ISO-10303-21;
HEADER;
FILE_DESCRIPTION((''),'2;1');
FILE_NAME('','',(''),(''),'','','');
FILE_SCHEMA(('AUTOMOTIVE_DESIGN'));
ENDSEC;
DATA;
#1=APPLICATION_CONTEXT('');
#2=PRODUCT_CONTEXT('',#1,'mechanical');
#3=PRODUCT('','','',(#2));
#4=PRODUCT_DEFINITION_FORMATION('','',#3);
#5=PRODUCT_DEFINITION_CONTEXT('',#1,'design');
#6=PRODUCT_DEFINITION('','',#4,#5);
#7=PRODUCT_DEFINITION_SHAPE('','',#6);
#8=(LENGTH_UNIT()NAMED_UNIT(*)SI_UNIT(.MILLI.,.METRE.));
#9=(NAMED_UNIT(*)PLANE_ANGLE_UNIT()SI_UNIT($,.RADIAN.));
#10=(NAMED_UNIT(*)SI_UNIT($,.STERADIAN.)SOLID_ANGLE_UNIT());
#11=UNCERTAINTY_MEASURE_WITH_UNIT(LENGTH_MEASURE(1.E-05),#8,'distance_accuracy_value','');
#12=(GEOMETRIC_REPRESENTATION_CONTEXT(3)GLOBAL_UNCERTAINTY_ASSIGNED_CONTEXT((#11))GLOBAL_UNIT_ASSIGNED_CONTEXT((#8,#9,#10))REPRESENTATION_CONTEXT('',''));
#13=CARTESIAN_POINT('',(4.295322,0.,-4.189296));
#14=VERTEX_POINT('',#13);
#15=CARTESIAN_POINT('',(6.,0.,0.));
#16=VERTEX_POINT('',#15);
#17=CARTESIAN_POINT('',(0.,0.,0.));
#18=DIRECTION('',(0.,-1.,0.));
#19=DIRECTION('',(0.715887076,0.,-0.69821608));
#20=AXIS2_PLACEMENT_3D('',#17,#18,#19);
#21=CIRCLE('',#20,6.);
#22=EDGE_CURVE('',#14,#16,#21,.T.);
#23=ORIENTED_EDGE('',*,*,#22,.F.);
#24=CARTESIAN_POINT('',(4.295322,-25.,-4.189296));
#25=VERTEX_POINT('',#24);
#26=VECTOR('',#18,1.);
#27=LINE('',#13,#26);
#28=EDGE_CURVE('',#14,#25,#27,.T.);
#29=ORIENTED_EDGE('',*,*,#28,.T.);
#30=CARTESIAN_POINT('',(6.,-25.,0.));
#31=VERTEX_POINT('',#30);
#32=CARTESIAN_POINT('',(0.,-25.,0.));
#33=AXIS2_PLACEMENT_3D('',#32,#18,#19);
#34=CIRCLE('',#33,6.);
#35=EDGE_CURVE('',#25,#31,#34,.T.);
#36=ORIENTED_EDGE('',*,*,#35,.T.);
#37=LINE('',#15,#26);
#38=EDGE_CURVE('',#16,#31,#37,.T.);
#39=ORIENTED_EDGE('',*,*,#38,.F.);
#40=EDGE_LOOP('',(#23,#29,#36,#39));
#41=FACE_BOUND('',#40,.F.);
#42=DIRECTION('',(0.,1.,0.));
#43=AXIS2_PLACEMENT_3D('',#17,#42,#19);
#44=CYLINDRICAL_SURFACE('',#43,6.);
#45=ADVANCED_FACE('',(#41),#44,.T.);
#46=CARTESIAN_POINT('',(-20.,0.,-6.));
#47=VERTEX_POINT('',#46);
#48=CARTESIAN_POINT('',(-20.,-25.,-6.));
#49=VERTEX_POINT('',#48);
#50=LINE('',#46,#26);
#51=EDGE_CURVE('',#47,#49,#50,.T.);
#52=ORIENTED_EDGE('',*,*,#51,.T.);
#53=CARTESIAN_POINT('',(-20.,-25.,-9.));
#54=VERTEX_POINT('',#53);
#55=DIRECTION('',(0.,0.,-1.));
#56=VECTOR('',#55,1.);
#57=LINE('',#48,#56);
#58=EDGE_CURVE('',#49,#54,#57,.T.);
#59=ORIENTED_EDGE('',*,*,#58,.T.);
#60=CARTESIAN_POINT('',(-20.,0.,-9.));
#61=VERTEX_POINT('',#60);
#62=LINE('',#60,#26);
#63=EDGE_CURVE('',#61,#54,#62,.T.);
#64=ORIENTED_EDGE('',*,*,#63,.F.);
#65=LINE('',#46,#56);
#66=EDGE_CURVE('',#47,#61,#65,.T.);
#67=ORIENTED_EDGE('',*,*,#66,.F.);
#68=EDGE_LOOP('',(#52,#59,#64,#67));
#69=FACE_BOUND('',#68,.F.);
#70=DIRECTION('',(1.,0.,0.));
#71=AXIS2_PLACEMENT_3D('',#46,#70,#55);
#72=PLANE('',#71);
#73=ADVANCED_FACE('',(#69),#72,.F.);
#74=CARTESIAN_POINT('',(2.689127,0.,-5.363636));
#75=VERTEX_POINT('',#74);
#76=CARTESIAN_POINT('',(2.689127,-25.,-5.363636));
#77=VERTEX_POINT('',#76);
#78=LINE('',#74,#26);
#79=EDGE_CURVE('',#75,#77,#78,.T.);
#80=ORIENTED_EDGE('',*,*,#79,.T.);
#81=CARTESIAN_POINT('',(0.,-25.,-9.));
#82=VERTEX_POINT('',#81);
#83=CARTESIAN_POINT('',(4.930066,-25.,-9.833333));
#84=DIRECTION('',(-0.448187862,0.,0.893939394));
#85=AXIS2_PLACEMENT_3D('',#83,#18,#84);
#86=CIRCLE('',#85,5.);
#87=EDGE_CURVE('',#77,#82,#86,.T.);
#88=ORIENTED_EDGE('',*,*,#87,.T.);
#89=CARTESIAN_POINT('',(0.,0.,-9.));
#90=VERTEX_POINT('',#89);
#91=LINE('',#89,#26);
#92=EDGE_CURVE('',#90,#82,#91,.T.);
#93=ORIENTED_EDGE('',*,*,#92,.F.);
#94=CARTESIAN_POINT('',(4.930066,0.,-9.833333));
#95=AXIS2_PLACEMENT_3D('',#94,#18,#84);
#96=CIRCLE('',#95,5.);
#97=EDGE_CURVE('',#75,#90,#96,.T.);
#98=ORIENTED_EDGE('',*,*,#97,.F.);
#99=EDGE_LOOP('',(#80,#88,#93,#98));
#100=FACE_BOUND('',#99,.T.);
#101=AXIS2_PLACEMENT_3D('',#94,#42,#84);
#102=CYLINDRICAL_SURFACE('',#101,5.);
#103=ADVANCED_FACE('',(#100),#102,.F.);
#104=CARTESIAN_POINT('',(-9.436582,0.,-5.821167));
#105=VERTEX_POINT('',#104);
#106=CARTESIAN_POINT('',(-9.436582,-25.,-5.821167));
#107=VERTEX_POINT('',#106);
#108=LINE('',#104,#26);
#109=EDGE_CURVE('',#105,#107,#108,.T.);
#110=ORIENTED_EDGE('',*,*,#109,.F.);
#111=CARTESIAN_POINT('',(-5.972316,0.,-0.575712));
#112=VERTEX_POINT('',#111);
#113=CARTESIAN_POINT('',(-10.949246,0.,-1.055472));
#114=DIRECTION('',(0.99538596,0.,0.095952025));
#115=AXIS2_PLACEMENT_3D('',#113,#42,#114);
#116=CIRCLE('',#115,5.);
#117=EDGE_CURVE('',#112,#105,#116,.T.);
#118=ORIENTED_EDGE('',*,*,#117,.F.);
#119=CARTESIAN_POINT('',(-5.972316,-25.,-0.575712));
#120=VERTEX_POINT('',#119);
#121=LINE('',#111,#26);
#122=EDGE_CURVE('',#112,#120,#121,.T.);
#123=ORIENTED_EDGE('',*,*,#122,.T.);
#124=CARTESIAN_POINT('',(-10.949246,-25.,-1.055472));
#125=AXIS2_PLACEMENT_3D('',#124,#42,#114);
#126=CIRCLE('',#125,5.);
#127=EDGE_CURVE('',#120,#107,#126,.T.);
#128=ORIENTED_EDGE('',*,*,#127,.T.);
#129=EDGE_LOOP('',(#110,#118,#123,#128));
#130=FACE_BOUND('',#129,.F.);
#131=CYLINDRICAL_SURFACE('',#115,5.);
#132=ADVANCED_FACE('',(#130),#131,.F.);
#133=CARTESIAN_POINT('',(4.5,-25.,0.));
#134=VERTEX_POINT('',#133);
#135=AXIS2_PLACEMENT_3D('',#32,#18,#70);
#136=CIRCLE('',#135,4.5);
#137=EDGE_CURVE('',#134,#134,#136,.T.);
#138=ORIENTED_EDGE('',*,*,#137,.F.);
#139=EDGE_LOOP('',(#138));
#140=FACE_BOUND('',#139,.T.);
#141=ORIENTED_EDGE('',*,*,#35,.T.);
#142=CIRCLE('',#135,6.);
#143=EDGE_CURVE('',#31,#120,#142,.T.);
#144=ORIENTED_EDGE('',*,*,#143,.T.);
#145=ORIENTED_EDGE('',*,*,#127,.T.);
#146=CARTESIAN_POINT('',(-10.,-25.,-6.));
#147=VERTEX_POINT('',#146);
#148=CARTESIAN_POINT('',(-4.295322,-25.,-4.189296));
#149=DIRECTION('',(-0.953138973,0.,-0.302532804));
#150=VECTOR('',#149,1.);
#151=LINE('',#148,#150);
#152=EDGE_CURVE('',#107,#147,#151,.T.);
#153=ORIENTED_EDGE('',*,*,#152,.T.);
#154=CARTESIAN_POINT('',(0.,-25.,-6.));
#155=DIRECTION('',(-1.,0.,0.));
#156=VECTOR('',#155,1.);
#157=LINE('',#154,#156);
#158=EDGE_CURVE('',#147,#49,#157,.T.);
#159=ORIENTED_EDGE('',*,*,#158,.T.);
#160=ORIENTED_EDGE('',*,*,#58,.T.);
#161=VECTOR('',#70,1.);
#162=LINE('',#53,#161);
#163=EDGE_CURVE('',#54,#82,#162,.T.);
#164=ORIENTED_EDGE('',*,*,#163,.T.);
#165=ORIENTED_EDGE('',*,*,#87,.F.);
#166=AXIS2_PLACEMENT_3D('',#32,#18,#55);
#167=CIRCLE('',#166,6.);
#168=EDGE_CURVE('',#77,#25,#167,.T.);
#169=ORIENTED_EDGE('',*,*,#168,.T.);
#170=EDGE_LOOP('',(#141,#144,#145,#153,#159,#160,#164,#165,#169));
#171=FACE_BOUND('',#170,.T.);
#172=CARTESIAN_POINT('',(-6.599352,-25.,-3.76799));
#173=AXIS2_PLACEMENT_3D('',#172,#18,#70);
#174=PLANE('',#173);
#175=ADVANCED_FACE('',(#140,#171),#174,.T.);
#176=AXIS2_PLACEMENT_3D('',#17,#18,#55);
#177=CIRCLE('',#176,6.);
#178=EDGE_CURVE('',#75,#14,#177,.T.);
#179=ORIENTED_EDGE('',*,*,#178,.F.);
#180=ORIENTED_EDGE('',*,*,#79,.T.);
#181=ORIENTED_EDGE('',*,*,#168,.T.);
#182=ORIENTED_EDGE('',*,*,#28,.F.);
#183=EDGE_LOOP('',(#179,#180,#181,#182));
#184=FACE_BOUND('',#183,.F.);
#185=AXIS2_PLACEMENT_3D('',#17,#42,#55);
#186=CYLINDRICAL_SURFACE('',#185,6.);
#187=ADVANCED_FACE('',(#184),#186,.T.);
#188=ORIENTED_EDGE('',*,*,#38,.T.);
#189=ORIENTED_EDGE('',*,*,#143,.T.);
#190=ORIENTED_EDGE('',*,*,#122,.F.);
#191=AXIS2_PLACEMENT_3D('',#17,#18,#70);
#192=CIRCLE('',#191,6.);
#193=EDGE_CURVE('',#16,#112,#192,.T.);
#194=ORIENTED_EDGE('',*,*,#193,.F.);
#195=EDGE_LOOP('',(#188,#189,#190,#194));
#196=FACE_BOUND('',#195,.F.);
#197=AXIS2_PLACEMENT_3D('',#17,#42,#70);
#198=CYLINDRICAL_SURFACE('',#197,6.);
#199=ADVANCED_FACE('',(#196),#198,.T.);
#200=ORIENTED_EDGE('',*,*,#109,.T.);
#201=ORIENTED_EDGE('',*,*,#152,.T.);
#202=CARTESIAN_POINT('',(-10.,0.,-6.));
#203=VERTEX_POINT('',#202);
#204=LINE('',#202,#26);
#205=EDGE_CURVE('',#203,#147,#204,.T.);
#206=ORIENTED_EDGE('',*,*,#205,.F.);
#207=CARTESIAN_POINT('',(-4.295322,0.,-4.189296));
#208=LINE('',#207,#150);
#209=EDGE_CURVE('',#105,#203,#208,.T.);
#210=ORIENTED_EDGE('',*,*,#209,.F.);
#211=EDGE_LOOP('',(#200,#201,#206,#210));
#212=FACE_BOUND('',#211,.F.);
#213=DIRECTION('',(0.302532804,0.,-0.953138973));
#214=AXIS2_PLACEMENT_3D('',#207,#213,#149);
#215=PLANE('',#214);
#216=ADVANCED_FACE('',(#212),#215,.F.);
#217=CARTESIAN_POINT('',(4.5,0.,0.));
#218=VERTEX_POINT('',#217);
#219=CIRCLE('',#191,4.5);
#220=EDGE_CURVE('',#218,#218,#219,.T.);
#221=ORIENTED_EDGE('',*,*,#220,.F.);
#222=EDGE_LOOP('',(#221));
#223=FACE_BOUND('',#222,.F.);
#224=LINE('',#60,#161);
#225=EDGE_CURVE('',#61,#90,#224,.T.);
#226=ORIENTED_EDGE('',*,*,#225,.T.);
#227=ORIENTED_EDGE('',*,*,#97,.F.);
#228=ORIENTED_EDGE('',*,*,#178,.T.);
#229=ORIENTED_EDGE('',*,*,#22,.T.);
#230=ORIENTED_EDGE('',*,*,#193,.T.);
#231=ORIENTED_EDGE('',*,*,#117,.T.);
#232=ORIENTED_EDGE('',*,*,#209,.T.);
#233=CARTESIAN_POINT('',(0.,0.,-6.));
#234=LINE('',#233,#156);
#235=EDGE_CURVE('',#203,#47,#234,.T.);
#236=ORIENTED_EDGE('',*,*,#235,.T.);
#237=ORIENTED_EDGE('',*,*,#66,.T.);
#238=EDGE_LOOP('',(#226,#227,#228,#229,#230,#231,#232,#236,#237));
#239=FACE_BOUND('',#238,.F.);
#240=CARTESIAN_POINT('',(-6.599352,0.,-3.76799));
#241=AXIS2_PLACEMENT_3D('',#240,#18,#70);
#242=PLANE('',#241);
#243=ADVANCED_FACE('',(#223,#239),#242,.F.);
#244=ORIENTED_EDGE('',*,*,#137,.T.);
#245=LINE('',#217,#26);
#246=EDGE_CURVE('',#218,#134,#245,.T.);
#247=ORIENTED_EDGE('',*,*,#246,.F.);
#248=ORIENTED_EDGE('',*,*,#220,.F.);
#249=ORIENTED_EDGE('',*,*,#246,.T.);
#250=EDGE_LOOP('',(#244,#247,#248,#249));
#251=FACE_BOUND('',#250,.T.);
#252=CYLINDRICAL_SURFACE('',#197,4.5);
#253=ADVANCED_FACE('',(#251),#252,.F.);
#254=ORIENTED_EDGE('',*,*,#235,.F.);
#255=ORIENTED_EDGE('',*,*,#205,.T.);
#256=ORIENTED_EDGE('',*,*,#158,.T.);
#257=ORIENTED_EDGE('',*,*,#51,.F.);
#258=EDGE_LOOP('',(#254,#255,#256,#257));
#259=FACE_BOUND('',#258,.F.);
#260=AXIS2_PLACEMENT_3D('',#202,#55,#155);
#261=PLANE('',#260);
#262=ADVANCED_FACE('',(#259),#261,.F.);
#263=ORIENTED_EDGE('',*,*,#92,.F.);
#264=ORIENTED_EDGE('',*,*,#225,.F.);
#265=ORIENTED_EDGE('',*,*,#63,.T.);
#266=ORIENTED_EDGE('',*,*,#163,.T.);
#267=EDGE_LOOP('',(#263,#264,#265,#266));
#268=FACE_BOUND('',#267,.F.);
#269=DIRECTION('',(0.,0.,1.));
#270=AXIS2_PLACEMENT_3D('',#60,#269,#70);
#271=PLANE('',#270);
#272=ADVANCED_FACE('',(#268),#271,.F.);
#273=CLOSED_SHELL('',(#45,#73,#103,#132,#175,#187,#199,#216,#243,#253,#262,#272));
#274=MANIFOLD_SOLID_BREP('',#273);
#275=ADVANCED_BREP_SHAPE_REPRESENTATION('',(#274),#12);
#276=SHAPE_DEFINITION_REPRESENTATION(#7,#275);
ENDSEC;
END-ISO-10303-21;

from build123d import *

# Parameters (mm, degrees)
F0_R        = 4.5
F1_DEPTH    = 25
F2_T1_DEPTH = 25


# Not quite as in the source:
# - a fillet or chamfer that OpenCascade refuses, or shapes differently, is made with other operations: its cross-section is extruded or revolved along the edge and cut away or added


with BuildPart() as f1:
    # F0 (on Front) → F1 (new body)
    with BuildSketch(Plane.XZ):
        with BuildLine():
            ThreePointArc((4.2953224556, -4.1892964806), (5.5575144954, -2.2614227011), (6, 0))
            ThreePointArc((6, 0), (-2.2614227011, 5.5575144954), (-4.2953224556, -4.1892964806))
            ThreePointArc((-4.2953224556, -4.1892964806), (-2.3306888592, -5.5288235133), (0, -6))
            ThreePointArc((0, -6), (2.3306888592, -5.5288235133), (4.2953224556, -4.1892964806))
        make_face()
        Circle(F0_R, mode=Mode.SUBTRACT)
        Polygon((0, -9), (0, -6), (-10, -6), (-20, -6), (-20, -9), align=None)
        with BuildLine():
            ThreePointArc((0, -6), (-2.3306888592, -5.5288235133), (-4.2953224556, -4.1892964806))
            Line((-4.2953224556, -4.1892964806), (-10, -6))
            Line((-10, -6), (0, -6))
        make_face()
    extrude(amount=F1_DEPTH)

    # F2: fillet of radius 5 on 2 edges, made by hand

    # F2_s2 → F2_t1 (join)
    with BuildSketch(Plane.XZ):
        with BuildLine():
            ThreePointArc((-5.9723157586, -0.5757121498), (-6.7770271427, -3.8109383875), (-9.4365815374, -5.8211671413))
            Line((-9.4365815374, -5.8211671413), (-4.2953224556, -4.1892964806))
            ThreePointArc((-4.2953224556, -4.1892964806), (-5.4424807352, -2.5257480964), (-5.9723157586, -0.5757121498))
        make_face()
        with BuildLine():
            ThreePointArc((2.6891271741, -5.3636363636), (0.9099152249, -6.8603913833), (0, -9))
            Line((0, -9), (0, -6))
            ThreePointArc((0, -6), (1.3816985594, -5.8387420812), (2.6891271741, -5.3636363636))
        make_face()
    extrude(amount=F2_T1_DEPTH)


solid = f1.part
